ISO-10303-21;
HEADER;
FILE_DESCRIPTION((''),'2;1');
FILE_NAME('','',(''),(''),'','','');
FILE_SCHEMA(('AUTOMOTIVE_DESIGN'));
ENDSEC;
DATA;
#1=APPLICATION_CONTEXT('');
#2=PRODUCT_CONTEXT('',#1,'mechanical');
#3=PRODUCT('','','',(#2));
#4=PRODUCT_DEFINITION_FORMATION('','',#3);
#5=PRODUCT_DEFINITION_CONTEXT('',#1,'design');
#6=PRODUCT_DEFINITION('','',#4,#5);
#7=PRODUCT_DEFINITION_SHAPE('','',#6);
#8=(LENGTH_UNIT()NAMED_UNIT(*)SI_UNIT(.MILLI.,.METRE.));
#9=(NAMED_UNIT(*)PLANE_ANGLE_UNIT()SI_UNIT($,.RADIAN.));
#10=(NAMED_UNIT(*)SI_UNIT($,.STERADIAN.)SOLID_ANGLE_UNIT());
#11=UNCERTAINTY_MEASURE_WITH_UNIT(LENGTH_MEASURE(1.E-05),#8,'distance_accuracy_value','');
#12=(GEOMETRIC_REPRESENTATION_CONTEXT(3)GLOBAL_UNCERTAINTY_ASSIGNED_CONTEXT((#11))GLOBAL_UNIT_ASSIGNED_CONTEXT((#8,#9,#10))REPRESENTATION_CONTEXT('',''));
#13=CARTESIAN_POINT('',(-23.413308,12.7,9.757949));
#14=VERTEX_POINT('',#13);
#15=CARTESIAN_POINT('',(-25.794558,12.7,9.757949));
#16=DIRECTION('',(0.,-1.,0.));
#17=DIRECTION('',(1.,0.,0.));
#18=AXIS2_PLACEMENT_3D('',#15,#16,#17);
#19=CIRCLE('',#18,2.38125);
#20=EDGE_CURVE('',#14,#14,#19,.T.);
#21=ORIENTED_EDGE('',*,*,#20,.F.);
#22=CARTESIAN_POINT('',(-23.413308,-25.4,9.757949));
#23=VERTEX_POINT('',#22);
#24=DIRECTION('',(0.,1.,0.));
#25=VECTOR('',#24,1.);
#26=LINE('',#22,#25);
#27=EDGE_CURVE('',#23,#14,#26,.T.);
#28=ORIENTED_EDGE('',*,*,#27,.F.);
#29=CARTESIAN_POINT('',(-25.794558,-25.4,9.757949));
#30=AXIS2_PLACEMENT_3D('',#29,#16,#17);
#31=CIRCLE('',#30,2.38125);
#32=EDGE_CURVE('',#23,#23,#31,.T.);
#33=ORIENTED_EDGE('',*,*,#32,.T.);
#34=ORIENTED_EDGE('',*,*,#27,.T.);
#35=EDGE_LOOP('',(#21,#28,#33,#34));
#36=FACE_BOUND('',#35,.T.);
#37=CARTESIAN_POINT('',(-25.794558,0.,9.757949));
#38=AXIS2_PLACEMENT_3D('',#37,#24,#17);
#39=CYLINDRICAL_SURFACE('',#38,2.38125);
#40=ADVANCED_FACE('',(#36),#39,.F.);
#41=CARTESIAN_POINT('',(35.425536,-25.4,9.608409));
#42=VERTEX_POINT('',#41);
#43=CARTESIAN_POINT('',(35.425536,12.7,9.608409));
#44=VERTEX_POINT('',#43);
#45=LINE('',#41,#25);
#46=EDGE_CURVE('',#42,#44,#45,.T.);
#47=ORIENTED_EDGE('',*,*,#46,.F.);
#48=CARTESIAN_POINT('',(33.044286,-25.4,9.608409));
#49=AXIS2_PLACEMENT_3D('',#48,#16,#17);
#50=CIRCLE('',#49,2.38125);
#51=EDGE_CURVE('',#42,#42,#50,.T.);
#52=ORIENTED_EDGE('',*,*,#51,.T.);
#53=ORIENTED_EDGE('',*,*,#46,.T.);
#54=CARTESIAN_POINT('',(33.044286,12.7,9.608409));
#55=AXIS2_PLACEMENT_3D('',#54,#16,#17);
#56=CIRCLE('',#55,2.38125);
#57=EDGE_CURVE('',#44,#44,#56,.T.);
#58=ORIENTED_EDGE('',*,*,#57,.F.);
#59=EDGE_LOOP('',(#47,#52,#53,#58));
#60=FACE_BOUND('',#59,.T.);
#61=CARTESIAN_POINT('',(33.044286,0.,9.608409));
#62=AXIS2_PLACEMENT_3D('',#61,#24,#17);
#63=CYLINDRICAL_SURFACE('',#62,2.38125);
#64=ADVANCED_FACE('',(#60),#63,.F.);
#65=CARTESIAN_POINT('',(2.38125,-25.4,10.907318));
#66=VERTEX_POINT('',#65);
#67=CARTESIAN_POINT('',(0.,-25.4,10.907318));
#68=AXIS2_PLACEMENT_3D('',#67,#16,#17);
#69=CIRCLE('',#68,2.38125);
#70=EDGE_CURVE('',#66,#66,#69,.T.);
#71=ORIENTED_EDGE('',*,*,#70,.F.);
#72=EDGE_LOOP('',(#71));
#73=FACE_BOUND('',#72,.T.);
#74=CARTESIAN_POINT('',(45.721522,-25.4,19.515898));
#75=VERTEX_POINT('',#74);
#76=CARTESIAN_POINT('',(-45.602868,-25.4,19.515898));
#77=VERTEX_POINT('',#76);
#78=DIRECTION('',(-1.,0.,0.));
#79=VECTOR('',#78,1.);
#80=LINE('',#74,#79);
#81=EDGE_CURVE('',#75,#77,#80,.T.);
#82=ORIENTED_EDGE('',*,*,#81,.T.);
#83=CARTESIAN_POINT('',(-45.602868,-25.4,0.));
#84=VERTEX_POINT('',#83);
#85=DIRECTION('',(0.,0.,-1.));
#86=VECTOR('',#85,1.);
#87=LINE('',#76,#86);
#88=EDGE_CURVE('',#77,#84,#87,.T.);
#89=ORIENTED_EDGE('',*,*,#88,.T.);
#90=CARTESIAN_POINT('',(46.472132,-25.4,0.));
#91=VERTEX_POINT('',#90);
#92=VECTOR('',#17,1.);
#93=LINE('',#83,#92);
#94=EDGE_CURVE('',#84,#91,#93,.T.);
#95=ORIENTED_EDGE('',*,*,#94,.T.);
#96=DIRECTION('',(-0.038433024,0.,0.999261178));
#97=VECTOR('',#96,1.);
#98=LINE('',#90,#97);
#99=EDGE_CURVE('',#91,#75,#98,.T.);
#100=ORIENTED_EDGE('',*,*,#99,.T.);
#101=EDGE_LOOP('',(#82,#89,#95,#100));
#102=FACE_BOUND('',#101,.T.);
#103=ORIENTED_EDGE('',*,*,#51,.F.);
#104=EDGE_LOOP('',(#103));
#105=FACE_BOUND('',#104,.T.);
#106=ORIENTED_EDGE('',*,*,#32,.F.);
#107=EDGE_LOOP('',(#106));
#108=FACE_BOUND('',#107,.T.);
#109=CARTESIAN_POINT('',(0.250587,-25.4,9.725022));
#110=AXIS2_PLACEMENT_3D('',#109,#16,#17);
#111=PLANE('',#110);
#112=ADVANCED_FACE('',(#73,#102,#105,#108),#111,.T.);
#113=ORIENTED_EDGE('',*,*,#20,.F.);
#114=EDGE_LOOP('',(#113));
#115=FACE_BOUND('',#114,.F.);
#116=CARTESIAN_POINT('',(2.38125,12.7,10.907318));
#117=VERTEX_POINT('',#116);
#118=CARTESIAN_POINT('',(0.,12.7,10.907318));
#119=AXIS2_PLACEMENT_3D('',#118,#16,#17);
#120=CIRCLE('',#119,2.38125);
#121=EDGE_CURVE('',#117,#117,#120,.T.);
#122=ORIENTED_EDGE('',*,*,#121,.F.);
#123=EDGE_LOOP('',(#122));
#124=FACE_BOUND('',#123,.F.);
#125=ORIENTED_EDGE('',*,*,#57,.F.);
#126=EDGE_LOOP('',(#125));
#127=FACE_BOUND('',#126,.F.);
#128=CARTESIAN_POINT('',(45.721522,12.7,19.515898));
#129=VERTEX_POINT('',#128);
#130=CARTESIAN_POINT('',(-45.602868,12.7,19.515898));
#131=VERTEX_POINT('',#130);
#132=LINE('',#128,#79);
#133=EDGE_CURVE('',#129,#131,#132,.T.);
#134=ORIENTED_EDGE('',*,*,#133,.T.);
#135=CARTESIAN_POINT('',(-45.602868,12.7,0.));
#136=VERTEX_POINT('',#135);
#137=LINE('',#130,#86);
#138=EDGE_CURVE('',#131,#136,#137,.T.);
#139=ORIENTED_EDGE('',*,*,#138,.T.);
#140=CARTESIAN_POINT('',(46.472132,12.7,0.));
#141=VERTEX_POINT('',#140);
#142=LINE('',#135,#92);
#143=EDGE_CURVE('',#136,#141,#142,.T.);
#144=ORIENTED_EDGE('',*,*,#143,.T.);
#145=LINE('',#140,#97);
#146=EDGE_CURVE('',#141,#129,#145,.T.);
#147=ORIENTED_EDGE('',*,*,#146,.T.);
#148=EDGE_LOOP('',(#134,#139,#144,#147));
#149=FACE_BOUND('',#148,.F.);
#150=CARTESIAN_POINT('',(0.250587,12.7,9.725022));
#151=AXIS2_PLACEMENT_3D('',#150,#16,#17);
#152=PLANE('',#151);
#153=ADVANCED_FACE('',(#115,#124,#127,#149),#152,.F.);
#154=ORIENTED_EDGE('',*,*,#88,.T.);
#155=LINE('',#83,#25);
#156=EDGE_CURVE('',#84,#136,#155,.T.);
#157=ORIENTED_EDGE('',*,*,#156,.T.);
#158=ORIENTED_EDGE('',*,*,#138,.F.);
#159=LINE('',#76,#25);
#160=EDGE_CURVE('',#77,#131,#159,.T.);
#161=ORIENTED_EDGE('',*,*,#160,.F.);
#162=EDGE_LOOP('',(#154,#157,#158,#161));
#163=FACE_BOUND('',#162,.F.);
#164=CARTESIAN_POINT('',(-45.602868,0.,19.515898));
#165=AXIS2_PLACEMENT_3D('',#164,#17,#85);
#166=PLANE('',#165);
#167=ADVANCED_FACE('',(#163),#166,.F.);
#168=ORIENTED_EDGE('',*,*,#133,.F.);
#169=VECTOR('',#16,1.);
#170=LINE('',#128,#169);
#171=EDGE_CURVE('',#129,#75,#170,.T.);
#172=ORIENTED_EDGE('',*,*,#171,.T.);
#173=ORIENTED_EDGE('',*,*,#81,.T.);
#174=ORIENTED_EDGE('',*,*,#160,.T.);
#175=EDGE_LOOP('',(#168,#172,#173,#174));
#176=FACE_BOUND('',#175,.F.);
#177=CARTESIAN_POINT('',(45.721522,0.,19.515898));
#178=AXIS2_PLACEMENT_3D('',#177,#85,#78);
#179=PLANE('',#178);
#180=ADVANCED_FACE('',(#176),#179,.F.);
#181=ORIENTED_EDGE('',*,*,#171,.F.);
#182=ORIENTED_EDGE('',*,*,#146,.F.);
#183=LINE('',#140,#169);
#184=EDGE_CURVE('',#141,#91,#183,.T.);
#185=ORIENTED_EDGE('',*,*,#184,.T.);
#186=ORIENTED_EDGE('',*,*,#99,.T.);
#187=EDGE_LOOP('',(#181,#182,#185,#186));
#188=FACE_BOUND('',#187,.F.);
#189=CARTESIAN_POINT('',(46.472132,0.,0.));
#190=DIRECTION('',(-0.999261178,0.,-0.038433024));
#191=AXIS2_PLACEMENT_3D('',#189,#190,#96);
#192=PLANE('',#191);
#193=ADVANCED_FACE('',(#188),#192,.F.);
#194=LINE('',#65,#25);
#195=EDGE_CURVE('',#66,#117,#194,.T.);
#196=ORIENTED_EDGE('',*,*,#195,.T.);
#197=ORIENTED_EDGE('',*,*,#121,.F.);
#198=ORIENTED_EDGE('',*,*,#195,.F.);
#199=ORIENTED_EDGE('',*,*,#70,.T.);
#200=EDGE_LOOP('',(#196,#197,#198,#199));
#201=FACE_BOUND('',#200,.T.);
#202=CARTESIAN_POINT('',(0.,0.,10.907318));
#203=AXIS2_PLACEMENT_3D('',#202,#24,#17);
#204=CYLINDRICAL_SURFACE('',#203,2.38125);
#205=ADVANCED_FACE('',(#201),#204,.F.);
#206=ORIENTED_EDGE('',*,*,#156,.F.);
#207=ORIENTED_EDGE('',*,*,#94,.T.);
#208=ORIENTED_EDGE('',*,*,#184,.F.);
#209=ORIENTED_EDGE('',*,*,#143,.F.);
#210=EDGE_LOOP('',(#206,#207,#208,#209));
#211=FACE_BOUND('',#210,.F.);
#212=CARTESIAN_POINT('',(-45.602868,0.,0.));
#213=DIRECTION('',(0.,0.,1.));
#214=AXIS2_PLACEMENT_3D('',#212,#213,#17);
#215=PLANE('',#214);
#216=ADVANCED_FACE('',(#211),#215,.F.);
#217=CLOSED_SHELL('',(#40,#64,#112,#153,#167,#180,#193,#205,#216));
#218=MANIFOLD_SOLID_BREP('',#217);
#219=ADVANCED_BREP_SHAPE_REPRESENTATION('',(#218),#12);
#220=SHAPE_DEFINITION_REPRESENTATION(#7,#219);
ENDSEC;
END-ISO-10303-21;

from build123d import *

# Parameters (mm, degrees)
F0_R     = 2.38125
F1_DEPTH = 12.7
F2_DEPTH = 25.4
F3_DEPTH = 25.4
F4_DEPTH = 25.4


# Not quite as in the source:
# - a feature names something its author has since deleted; it is built from what else it names


with BuildPart() as f1:
    # F0 (on Front) → F1 (new body, symmetric)
    with BuildSketch(Plane.XZ):
        Polygon((-45.6028679988, 0), (46.4721320012, 0), (45.7215224688, 19.5158975394), (-45.6028679988, 19.5158975394), align=None)
        with Locations((33.0442860723, 9.6084093675)):
            Circle(F0_R, mode=Mode.SUBTRACT)
        with Locations((-25.7945582271, 9.7579487697)):
            Circle(F0_R, mode=Mode.SUBTRACT)
        with Locations((0, 10.9073175117)):
            Circle(F0_R, mode=Mode.SUBTRACT)
    extrude(amount=F1_DEPTH, both=True)

    # F0 (on Front) → F2 (join)
    with BuildSketch(Plane.XZ):
        Polygon((-45.6028679988, 0), (46.4721320012, 0), (45.7215224688, 19.5158975394), (-45.6028679988, 19.5158975394), align=None)
        with Locations((33.0442860723, 9.6084093675)):
            Circle(F0_R, mode=Mode.SUBTRACT)
        with Locations((-25.7945582271, 9.7579487697)):
            Circle(F0_R, mode=Mode.SUBTRACT)
        with Locations((0, 10.9073175117)):
            Circle(F0_R, mode=Mode.SUBTRACT)
    extrude(amount=F2_DEPTH)

    # F0 (on Front) → F3 (join)
    with BuildSketch(Plane.XZ):
        Polygon((-45.6028679988, 0), (46.4721320012, 0), (45.7215224688, 19.5158975394), (-45.6028679988, 19.5158975394), align=None)
        with Locations((33.0442860723, 9.6084093675)):
            Circle(F0_R, mode=Mode.SUBTRACT)
        with Locations((-25.7945582271, 9.7579487697)):
            Circle(F0_R, mode=Mode.SUBTRACT)
        with Locations((0, 10.9073175117)):
            Circle(F0_R, mode=Mode.SUBTRACT)
    extrude(amount=F3_DEPTH)

    # F0 (on Front) → F4 (join)
    with BuildSketch(Plane.XZ):
        Polygon((-45.6028679988, 0), (46.4721320012, 0), (45.7215224688, 19.5158975394), (-45.6028679988, 19.5158975394), align=None)
        with Locations((33.0442860723, 9.6084093675)):
            Circle(F0_R, mode=Mode.SUBTRACT)
        with Locations((-25.7945582271, 9.7579487697)):
            Circle(F0_R, mode=Mode.SUBTRACT)
        with Locations((0, 10.9073175117)):
            Circle(F0_R, mode=Mode.SUBTRACT)
    extrude(amount=F4_DEPTH)


solid = f1.part
